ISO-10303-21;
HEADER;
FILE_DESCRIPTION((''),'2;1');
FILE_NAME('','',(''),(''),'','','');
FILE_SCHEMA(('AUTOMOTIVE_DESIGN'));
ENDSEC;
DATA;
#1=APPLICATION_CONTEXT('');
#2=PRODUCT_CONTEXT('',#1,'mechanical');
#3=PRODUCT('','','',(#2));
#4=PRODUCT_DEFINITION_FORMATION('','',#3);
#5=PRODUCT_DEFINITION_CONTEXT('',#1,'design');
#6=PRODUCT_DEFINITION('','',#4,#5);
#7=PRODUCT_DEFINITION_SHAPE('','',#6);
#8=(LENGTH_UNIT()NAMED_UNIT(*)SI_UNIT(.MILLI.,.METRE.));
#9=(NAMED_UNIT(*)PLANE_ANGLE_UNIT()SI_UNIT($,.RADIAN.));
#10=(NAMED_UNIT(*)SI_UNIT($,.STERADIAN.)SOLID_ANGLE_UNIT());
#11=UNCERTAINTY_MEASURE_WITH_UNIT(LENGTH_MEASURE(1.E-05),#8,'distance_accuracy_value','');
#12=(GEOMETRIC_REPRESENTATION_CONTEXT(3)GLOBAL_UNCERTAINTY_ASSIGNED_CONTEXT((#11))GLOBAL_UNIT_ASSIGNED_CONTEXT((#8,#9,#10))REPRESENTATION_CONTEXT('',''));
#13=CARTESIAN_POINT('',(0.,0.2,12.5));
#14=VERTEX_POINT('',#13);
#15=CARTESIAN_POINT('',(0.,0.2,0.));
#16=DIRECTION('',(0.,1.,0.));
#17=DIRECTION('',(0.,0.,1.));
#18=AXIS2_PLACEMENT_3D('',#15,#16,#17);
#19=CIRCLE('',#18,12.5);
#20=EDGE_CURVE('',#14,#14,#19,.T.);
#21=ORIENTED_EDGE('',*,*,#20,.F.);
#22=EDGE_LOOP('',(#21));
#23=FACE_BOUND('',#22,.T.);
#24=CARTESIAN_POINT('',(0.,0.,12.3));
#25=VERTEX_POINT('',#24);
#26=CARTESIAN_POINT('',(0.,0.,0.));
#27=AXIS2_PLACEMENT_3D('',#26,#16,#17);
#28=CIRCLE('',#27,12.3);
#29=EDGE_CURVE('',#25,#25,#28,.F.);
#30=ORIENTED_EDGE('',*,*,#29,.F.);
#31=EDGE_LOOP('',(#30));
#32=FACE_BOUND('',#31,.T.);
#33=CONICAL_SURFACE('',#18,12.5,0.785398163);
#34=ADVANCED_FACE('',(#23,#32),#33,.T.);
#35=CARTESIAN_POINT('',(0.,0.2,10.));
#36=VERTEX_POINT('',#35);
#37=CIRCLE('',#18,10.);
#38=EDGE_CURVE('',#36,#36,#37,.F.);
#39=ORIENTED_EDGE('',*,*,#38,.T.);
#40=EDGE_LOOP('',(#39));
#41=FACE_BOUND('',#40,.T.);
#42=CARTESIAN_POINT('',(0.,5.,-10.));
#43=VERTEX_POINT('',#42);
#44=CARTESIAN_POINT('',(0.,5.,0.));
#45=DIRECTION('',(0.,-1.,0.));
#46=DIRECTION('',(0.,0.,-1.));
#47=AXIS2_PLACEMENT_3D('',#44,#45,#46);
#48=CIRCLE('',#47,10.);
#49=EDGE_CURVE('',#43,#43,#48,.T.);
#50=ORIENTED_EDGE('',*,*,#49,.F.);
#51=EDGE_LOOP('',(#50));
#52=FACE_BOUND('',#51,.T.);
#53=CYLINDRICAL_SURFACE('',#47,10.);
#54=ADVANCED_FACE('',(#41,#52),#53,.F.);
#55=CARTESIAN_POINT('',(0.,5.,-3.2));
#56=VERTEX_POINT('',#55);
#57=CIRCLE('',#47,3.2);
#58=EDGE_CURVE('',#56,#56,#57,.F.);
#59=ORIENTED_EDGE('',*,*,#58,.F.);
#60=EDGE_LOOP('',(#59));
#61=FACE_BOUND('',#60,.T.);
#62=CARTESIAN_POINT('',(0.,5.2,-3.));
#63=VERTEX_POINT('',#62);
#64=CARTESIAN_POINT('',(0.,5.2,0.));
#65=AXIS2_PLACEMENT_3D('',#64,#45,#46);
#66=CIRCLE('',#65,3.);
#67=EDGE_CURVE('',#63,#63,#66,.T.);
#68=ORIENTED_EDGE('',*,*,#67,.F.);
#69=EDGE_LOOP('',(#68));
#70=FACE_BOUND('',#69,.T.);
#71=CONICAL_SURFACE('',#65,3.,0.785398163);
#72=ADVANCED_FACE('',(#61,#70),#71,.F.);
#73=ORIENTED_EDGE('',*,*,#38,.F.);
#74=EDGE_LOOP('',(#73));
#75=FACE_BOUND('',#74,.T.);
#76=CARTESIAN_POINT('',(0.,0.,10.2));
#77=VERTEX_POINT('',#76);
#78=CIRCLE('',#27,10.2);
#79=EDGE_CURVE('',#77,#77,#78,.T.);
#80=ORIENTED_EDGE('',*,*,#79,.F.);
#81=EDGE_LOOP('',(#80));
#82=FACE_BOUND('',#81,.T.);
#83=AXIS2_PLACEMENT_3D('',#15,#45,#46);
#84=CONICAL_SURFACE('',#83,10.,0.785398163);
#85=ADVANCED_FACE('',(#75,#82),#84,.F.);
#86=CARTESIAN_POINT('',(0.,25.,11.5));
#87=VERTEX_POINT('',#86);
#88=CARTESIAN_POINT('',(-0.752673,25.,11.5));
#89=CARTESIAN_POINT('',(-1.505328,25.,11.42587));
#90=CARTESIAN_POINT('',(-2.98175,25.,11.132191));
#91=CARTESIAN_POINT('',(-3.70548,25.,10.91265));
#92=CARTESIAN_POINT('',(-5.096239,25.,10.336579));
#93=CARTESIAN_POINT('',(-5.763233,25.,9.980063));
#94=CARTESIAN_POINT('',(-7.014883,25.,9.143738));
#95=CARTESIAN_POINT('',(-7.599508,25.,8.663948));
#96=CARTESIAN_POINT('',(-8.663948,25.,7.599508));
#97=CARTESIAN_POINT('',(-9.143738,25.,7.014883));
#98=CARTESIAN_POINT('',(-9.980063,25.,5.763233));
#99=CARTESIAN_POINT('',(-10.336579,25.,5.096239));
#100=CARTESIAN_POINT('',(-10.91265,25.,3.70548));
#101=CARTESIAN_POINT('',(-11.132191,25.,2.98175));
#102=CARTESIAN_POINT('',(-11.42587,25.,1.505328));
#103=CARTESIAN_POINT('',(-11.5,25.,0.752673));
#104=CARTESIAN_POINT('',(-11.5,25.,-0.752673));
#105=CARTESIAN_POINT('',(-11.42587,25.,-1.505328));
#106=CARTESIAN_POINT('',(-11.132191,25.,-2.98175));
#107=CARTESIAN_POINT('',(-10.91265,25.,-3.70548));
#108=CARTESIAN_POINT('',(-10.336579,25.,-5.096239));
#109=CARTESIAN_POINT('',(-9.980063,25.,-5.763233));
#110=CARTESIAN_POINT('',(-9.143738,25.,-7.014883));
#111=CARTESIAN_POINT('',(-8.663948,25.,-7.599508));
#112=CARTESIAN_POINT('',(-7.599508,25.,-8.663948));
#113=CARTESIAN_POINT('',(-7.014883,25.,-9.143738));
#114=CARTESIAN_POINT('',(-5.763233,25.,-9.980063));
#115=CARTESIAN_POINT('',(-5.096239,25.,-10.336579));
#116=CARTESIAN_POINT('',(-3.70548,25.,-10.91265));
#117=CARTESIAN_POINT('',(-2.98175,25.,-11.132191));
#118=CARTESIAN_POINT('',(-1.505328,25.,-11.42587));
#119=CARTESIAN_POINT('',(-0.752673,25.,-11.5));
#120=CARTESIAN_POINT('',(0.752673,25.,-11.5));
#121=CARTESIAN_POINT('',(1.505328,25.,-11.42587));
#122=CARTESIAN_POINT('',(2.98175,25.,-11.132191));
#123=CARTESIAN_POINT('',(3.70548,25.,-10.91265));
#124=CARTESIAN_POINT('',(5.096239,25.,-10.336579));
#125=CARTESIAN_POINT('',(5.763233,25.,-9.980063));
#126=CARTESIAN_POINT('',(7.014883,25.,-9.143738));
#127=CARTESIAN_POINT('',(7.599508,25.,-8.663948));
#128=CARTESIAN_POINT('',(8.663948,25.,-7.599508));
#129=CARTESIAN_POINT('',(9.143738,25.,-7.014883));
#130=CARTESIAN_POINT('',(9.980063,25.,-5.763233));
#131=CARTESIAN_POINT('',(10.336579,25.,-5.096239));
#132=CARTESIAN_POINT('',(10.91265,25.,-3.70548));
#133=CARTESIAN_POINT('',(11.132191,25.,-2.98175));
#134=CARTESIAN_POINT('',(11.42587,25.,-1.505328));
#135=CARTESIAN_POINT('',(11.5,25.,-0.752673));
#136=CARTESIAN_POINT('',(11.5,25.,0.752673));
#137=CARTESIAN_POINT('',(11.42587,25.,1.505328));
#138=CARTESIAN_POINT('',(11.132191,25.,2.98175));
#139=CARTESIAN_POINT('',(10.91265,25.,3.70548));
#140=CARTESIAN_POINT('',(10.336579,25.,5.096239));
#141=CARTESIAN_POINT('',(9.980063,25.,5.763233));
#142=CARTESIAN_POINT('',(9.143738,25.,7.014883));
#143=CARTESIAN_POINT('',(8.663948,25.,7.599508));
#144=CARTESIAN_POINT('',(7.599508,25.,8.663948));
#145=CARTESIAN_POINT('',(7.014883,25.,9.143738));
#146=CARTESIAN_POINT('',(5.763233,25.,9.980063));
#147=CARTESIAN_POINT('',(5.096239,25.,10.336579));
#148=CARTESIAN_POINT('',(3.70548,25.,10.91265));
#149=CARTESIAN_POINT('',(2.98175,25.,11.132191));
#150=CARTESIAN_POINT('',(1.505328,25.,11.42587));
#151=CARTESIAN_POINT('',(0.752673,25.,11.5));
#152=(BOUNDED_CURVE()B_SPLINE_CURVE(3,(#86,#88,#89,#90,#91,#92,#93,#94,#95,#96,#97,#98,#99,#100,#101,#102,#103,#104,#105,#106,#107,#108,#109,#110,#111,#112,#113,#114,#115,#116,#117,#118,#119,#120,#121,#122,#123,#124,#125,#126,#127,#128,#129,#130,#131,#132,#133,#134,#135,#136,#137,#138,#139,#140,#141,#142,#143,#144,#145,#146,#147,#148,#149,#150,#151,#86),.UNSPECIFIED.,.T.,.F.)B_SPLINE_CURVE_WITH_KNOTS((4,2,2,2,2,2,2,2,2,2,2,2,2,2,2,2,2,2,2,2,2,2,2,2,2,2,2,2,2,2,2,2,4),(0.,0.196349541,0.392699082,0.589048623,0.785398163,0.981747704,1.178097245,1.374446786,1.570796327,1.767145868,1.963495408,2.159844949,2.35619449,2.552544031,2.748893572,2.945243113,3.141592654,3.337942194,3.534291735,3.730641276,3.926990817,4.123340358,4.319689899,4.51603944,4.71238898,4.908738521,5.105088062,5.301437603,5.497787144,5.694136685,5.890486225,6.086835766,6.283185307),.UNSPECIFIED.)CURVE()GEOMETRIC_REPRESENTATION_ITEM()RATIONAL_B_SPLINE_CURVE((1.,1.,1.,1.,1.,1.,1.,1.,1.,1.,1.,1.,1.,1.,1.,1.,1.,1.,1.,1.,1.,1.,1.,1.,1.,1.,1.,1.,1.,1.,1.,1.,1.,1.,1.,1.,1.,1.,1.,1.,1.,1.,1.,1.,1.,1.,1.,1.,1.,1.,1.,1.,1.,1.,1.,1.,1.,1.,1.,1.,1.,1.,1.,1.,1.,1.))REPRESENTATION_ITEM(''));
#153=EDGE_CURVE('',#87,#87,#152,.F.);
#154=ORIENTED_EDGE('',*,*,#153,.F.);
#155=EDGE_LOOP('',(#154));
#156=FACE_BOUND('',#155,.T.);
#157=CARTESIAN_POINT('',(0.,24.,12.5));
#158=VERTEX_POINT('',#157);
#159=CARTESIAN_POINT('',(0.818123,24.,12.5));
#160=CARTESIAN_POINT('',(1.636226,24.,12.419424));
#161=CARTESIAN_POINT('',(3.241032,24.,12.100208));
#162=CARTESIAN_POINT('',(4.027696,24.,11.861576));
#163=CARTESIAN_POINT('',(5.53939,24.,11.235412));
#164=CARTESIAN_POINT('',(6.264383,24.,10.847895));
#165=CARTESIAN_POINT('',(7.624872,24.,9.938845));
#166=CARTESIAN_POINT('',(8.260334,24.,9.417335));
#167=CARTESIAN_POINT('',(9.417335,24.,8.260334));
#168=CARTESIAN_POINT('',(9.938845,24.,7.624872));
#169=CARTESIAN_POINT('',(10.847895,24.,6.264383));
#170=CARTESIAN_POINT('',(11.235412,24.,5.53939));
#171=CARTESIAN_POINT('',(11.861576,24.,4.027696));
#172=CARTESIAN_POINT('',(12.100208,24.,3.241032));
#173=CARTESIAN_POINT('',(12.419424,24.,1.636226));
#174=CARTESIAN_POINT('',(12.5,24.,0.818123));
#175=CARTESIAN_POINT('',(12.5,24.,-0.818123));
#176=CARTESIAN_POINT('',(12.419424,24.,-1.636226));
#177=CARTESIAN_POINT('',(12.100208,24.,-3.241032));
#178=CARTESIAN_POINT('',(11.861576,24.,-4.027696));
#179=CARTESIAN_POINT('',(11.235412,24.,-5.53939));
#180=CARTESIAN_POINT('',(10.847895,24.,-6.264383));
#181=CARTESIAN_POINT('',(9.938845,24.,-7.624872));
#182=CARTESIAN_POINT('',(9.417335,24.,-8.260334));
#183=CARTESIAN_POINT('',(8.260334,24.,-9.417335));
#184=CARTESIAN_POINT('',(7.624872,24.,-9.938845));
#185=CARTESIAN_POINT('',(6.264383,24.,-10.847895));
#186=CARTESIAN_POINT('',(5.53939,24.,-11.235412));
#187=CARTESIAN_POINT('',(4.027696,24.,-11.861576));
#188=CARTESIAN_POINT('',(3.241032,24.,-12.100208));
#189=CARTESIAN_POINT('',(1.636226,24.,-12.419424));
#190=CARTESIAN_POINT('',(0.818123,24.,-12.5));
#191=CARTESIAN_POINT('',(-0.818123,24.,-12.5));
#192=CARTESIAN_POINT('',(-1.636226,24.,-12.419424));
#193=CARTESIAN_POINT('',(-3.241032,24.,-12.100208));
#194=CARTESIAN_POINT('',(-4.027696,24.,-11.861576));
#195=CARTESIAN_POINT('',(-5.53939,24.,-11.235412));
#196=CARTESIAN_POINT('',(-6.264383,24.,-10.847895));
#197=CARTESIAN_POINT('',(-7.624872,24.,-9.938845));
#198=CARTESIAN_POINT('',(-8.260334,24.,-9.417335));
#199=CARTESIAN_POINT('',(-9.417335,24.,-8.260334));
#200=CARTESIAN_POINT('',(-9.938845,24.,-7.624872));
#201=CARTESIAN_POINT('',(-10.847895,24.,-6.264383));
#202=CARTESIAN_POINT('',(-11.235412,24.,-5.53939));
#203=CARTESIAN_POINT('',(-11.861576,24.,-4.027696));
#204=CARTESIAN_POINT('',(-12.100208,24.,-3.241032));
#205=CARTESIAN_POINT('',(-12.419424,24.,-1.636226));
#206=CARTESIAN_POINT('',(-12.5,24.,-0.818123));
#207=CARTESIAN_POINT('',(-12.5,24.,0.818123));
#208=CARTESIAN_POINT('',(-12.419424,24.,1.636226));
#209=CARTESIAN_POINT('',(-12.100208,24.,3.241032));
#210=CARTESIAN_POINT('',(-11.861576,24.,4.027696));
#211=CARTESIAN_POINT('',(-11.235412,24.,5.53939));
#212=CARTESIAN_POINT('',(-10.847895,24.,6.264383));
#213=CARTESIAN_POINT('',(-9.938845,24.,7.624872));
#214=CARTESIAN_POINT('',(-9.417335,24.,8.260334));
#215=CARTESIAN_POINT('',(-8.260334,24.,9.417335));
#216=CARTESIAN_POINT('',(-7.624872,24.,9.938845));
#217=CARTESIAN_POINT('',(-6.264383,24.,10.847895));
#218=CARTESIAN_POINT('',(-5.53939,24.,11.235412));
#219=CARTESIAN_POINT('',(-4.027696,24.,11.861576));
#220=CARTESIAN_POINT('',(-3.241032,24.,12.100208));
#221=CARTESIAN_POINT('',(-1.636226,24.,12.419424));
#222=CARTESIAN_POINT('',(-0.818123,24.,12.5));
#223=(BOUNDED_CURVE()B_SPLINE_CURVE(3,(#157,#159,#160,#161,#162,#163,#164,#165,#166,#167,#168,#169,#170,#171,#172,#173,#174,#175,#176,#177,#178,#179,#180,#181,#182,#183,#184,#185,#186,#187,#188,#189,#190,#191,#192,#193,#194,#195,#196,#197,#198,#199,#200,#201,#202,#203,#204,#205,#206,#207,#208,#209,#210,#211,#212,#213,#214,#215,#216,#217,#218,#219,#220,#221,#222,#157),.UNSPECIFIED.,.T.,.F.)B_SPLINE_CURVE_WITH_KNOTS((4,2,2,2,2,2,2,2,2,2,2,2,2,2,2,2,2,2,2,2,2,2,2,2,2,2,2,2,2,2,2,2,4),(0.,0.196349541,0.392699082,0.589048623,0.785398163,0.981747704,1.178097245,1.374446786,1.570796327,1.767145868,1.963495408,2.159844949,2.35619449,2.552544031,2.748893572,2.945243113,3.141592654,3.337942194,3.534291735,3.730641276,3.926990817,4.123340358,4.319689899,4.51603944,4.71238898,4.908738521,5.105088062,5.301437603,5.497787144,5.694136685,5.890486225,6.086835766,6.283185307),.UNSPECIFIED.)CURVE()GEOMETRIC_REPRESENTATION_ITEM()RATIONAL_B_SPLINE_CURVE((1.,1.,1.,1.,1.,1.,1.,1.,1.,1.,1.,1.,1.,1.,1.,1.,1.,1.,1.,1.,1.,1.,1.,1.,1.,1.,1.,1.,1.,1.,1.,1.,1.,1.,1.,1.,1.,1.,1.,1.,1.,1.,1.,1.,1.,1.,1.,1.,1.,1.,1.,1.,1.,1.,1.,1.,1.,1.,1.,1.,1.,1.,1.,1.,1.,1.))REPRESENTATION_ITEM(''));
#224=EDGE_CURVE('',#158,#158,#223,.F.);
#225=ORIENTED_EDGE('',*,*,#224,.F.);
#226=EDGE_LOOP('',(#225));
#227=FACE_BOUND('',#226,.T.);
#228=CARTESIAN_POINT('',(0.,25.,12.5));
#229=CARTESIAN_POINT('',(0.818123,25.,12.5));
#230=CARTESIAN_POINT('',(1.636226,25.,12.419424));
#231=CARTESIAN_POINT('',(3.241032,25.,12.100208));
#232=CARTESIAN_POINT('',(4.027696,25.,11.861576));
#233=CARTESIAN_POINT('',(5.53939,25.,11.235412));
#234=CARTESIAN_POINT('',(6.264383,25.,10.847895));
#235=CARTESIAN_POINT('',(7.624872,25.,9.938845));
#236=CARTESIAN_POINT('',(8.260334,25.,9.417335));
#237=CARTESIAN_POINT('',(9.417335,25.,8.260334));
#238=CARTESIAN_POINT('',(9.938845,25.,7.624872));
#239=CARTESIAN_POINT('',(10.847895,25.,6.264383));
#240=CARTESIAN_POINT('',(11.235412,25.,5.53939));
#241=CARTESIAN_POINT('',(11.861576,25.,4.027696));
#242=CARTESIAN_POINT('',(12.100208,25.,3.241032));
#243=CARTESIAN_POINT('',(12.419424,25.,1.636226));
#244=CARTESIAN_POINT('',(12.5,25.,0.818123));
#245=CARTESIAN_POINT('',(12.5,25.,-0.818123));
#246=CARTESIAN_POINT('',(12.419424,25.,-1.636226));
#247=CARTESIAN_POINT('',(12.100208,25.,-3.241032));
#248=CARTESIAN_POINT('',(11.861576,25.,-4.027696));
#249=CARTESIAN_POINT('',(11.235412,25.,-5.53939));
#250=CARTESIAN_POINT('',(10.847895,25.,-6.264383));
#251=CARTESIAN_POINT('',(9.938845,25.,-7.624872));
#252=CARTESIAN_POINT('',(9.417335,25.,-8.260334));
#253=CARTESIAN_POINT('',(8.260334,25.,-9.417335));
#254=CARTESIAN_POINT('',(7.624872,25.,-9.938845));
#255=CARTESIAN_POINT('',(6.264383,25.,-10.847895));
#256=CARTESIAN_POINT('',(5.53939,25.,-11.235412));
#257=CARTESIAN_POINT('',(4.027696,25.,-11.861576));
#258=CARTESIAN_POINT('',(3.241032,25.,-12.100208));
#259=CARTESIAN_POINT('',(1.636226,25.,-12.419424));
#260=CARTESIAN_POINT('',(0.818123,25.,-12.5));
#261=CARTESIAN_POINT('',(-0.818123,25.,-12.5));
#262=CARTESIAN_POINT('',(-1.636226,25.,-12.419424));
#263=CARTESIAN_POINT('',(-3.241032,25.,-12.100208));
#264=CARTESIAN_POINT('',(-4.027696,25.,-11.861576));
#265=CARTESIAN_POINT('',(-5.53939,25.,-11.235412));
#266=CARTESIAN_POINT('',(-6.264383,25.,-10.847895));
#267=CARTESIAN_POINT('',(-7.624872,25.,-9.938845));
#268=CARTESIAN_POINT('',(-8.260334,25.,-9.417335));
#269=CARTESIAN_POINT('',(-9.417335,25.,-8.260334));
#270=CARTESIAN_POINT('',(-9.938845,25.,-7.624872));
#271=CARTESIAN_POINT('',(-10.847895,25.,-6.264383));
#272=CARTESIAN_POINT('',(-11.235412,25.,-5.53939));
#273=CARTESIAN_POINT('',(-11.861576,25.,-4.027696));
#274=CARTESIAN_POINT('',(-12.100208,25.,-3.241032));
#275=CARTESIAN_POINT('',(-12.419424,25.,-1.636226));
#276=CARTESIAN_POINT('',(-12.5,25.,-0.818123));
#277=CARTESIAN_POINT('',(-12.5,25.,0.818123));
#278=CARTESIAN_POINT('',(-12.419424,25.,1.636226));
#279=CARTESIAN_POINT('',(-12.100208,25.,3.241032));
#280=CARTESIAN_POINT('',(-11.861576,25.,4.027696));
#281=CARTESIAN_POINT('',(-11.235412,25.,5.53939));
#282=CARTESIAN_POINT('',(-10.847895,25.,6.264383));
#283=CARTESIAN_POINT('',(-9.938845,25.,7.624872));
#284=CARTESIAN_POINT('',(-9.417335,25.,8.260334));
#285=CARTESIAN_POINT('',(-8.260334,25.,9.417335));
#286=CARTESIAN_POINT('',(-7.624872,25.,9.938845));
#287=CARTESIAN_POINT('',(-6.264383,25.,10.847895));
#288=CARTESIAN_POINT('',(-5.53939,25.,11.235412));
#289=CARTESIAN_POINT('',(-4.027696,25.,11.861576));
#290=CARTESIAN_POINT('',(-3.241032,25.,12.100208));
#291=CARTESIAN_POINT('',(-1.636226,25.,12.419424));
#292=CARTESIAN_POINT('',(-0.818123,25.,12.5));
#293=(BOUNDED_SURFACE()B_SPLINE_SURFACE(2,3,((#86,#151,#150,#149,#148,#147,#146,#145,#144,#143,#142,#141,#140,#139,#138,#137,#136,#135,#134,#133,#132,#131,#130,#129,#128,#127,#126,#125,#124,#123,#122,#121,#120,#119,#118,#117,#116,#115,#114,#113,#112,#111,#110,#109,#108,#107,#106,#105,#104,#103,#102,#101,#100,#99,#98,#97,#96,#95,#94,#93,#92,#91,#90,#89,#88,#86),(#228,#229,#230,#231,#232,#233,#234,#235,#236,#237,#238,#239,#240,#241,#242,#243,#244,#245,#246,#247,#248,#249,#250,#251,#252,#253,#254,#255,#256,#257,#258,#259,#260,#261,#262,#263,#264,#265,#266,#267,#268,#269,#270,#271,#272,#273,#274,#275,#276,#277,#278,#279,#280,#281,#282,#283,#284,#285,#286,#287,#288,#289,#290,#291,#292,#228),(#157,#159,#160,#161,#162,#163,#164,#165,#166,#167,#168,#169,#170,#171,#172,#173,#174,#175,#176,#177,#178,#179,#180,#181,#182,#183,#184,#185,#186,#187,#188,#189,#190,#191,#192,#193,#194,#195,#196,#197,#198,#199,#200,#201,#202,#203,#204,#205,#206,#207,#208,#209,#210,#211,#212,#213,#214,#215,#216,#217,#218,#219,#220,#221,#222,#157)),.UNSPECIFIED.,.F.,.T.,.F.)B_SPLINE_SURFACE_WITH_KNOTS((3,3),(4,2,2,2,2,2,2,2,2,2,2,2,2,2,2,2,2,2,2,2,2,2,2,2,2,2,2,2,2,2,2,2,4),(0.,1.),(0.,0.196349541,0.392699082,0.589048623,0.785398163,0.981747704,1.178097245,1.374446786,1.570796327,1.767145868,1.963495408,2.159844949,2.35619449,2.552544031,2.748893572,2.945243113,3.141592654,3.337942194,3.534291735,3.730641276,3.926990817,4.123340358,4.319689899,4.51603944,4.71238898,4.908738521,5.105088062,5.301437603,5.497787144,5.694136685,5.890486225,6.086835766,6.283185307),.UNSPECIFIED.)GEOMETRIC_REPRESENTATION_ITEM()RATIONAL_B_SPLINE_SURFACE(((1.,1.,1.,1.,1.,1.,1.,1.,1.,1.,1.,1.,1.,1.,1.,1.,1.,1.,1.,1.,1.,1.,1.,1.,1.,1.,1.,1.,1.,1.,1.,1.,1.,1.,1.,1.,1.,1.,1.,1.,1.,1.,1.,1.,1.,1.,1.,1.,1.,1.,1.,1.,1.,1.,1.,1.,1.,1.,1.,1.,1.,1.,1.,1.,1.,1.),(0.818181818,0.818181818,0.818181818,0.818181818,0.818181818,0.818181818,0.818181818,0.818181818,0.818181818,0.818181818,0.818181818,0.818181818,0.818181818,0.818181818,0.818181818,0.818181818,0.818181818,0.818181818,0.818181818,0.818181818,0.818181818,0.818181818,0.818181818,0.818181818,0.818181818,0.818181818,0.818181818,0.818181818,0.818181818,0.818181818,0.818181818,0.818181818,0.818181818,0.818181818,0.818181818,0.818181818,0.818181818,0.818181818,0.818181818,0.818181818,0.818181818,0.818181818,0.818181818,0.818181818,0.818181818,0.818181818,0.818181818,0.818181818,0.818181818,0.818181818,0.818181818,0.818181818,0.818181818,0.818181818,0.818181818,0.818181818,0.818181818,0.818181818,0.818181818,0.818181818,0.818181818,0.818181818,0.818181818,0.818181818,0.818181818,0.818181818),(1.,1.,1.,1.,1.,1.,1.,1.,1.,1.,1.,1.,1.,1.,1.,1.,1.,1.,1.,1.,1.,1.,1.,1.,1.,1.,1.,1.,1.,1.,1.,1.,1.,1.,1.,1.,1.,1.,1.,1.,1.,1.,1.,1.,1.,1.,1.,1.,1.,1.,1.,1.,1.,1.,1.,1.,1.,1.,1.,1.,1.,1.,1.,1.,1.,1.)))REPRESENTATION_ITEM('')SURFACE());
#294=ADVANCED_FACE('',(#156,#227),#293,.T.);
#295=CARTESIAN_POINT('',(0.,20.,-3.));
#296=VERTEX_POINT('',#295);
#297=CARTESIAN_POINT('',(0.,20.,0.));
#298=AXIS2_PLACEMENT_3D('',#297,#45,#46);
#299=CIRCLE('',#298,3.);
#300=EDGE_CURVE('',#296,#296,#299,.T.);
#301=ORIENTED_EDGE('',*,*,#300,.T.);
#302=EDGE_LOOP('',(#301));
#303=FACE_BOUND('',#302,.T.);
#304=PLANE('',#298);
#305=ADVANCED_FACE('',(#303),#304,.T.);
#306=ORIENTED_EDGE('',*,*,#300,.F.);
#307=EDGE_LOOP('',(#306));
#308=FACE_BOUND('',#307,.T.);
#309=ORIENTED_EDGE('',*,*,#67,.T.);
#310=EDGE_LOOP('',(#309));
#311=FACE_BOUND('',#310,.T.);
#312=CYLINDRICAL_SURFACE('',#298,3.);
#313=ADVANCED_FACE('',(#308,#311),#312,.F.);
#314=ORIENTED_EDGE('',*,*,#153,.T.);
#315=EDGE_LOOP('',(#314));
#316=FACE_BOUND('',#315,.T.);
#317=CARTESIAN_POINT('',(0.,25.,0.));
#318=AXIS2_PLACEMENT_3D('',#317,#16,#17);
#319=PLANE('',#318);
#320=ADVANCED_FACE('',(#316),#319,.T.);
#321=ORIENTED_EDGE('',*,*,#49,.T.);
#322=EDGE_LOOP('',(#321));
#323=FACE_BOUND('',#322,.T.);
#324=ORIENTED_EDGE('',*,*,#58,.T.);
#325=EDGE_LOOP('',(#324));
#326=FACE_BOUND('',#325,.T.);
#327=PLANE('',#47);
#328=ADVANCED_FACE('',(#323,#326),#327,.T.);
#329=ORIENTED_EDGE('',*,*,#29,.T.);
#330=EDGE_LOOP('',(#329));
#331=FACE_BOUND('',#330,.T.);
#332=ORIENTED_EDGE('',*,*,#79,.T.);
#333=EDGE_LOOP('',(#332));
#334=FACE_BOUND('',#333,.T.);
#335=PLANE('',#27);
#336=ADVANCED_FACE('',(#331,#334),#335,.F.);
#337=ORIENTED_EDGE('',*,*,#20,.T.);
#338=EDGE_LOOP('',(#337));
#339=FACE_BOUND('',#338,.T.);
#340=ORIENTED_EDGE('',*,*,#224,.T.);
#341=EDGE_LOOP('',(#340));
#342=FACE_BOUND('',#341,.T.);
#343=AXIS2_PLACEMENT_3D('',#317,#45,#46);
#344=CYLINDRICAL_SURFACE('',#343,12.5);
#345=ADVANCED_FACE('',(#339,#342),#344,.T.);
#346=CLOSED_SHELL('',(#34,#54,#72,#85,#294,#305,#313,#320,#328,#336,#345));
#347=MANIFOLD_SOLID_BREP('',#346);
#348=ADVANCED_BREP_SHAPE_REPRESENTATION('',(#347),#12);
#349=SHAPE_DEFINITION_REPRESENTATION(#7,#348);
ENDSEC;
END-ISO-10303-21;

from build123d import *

# Parameters (mm, degrees)
SKETCH_1_R          = 12.5
EXTRUDE_1_DEPTH     = 25
SKETCH_2_R          = 10
CUT_EXTRUDE_1_DEPTH = 5
SKETCH_3_R          = 3
CUT_EXTRUDE_2_DEPTH = 15
CHAMFER_1_SIZE      = 0.2
FILLET_1_SIZE       = 1


with BuildPart() as part:
    # 草图1 → 凸台-拉伸1 (new body)
    with BuildSketch(Plane(origin=(0, 0, 0), x_dir=(1, 0, 0), z_dir=(0, 1, 0))):
        with Locations(Location((0, 0, 0), (0, 0, 270))):
            Circle(SKETCH_1_R)
    extrude(amount=EXTRUDE_1_DEPTH)

    # 草图2 → 切除-拉伸1 (cut)
    with BuildSketch(Plane.XZ):
        with Locations(Location((0, 0, 0), (0, 0, 270))):
            Circle(SKETCH_2_R)
    extrude(amount=-CUT_EXTRUDE_1_DEPTH, mode=Mode.SUBTRACT)

    # 草图3 → 切除-拉伸2 (cut)
    with BuildSketch(Plane.XZ.offset(-5)):
        with Locations(Location((0, 0, 0), (0, 0, 270))):
            Circle(SKETCH_3_R)
    extrude(amount=-CUT_EXTRUDE_2_DEPTH, mode=Mode.SUBTRACT)

    # 倒角1
    chamfer_1_edges = [part.edges().sort_by_distance(p)[0] for p in [
        (0, 5, 3),
        (0, 0, -12.5),
        (0, 0, 10),
    ]]
    chamfer(chamfer_1_edges, length=CHAMFER_1_SIZE)

    # 圆角1
    # a fillet whose section is not a circle: 1 mm, written as the material it takes off along each edge
    with BuildSketch(Plane(origin=(0, 25, 0), x_dir=(0, 0, 1), z_dir=(-1, 0, 0))) as fillet_1_piece_1:
        with BuildLine():
            Bezier((12.5, -FILLET_1_SIZE), (12.5, 0), (12.5 - FILLET_1_SIZE, 0), weights=[1, 0.818181818, 1])
            Line((12.5 - FILLET_1_SIZE, 0), (12.5, 0))
            Line((12.5, 0), (12.5, -FILLET_1_SIZE))
        make_face()
    revolve(axis=Axis((0, 25, 0), (0, 1, 0)), mode=Mode.SUBTRACT)


solid = part.part
